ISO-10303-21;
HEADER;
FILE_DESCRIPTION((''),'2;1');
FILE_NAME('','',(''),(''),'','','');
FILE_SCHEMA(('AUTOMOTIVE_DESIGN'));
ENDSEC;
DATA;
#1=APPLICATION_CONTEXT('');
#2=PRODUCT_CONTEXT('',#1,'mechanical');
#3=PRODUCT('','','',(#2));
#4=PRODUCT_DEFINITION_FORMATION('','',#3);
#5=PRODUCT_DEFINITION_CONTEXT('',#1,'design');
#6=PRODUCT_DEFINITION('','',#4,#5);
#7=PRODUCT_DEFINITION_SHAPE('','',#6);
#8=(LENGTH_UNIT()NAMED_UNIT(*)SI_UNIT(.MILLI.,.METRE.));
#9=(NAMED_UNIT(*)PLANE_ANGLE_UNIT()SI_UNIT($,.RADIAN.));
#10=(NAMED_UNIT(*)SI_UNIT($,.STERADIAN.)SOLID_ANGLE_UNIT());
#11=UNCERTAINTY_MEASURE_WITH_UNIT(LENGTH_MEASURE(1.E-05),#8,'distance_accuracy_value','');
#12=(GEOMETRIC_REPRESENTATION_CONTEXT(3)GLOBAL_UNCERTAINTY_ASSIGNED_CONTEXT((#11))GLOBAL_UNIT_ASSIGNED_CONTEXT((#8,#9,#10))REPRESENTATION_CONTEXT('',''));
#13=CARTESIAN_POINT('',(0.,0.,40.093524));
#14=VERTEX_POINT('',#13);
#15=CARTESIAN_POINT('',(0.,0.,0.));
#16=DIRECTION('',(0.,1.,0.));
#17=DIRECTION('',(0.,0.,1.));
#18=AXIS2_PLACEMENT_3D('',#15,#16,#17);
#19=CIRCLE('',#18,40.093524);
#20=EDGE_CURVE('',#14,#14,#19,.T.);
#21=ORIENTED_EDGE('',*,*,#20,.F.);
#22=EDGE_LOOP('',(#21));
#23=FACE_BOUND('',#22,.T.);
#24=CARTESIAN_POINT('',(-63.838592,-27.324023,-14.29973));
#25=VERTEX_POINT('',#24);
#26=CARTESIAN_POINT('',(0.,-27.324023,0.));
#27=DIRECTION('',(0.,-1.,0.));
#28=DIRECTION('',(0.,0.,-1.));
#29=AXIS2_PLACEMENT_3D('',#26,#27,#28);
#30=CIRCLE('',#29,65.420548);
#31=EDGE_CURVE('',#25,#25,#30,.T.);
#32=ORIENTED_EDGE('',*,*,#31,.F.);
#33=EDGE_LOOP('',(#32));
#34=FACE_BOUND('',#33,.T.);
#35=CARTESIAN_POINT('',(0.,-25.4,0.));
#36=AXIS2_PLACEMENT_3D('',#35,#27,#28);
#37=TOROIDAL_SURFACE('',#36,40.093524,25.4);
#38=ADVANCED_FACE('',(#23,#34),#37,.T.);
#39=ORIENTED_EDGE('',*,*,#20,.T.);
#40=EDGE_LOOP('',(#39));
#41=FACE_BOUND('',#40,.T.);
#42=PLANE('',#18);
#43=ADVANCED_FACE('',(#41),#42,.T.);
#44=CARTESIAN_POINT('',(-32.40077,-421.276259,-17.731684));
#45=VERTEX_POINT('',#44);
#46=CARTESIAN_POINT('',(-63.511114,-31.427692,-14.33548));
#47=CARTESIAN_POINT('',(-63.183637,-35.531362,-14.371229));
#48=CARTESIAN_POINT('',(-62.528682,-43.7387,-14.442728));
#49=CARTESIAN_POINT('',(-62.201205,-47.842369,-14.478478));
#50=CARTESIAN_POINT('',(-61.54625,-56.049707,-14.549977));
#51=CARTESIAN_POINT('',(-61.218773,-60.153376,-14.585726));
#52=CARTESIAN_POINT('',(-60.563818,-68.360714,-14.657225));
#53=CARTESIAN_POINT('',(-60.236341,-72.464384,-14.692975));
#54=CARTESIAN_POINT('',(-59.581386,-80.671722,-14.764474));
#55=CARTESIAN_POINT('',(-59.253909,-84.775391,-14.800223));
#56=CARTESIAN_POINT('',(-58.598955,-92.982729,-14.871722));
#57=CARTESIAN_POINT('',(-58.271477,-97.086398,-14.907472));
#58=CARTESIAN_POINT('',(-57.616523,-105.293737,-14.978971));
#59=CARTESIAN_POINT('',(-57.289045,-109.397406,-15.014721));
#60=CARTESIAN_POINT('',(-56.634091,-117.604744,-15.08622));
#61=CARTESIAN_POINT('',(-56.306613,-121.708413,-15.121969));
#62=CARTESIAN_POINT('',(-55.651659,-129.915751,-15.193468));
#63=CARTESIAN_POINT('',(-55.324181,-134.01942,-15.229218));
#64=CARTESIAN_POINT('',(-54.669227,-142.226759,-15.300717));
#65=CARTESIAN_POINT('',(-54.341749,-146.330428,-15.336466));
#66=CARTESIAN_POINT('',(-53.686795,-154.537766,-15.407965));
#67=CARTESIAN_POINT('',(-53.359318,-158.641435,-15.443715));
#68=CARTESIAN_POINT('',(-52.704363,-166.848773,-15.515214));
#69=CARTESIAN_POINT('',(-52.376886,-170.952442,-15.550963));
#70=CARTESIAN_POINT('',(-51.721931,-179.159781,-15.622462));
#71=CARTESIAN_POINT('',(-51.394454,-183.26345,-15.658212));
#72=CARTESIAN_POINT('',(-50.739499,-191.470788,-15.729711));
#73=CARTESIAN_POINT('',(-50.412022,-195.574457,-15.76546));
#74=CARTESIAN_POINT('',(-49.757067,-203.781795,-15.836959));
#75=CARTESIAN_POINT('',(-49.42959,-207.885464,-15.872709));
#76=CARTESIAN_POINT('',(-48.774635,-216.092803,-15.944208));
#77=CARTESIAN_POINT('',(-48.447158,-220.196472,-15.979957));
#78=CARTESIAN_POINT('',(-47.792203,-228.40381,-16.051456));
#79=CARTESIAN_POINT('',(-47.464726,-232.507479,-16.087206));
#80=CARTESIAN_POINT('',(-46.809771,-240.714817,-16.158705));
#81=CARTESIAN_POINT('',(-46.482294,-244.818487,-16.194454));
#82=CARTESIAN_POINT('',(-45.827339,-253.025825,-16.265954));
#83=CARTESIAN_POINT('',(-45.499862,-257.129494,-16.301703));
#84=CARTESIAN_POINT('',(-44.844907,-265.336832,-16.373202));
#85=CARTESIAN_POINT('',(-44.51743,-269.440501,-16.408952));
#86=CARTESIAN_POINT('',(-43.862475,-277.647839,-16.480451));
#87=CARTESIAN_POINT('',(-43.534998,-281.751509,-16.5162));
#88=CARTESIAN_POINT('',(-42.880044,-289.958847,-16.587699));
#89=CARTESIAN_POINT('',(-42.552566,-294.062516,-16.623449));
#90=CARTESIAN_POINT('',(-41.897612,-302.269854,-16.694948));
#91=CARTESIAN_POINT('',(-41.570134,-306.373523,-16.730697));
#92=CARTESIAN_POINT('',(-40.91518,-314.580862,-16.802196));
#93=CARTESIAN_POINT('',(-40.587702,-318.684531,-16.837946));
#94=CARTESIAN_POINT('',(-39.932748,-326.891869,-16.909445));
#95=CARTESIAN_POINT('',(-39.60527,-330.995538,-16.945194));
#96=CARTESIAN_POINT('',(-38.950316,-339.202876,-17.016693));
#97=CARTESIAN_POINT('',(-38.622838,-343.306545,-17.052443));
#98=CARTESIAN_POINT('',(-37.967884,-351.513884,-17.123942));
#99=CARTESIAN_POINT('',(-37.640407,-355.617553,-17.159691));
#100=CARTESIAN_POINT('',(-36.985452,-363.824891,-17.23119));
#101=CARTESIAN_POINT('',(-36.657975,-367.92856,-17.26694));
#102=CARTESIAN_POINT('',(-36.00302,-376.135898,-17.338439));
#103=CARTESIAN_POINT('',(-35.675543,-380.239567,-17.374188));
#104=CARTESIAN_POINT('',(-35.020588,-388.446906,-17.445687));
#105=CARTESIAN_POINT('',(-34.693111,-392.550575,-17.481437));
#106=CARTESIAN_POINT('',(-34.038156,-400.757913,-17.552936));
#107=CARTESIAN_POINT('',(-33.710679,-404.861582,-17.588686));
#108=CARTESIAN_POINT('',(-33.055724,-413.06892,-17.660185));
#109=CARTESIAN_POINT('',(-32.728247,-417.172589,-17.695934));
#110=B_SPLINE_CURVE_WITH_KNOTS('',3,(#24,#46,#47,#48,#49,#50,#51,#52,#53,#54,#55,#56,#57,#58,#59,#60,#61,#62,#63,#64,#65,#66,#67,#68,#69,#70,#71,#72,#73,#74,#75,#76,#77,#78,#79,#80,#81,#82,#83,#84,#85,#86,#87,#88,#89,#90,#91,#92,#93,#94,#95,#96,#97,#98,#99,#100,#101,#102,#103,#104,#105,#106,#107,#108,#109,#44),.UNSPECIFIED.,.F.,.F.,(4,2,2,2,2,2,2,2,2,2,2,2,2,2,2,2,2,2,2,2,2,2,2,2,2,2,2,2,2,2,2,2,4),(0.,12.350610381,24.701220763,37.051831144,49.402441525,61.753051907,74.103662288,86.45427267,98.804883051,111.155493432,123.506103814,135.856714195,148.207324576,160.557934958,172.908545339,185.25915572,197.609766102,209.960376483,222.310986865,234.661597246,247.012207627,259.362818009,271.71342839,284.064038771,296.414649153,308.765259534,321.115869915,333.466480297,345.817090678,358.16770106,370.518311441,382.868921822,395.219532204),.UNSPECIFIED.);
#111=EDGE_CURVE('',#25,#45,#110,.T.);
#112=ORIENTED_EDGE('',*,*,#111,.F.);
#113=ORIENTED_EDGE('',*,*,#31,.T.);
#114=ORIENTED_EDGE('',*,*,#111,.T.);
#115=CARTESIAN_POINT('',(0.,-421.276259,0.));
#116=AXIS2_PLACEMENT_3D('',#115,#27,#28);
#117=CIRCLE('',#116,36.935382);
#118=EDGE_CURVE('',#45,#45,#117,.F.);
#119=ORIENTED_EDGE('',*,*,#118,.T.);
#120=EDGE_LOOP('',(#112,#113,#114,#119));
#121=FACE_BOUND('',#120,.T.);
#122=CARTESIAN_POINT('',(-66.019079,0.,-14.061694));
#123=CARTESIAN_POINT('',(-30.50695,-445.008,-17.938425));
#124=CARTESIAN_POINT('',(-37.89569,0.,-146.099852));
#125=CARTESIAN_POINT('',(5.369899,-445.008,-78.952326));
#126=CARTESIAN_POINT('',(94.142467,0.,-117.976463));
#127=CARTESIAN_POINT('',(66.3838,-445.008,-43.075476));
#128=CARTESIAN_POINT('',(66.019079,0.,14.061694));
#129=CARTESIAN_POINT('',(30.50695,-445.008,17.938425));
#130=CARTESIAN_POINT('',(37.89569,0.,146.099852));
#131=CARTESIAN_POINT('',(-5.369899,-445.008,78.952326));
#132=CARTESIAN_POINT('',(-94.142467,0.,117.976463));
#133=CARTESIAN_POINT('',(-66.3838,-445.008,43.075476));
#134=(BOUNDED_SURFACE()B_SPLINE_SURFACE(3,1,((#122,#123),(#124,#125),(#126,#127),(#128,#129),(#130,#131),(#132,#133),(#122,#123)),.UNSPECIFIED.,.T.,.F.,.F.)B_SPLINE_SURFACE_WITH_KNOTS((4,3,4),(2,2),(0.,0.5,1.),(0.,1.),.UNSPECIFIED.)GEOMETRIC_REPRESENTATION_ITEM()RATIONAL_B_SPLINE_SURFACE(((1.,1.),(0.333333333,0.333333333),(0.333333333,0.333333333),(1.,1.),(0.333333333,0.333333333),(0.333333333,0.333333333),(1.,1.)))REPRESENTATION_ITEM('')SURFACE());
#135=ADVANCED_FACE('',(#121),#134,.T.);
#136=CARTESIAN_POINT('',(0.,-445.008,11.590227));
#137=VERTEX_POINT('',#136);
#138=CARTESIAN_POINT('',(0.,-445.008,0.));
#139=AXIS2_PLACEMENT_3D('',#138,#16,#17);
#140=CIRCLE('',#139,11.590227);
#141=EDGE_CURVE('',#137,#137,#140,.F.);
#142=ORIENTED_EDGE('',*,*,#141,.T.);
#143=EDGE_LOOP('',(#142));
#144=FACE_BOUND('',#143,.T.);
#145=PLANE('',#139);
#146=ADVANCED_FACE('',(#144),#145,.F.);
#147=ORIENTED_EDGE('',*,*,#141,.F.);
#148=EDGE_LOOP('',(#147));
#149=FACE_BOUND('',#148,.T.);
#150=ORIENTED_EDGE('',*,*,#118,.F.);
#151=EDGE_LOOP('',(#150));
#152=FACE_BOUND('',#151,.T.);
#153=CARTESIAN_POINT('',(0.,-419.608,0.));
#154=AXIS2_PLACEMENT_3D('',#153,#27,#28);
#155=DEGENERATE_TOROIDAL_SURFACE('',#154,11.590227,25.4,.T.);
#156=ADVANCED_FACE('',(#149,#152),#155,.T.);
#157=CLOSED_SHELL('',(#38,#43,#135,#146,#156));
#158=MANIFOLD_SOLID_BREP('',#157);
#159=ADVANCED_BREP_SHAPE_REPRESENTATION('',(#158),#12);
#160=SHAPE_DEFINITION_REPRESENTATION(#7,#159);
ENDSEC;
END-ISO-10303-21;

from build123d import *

# Parameters (mm, degrees)
FILLET3_R = 25.4


with BuildPart() as part:
    # Loft1: read off the stored shape, not the designer's step
    # Loft1: loft between two sections, ruled curve by curve
    loft1_from = [
        Edge.make_bspline([(-66.019078693, 0, -14.06169437), (-37.895689953, 0, -146.099851756), (94.142467433, 0, -117.976463016), (66.019078693, 0, 14.06169437), (37.895689953, 0, 146.099851756), (-94.142467433, 0, 117.976463016), (-66.019078693, 0, -14.06169437)], [0, 0, 0, 0, 0.5, 0.5, 0.5, 1, 1, 1, 1], 3, [1, 0.333333333, 0.333333333, 1, 0.333333333, 0.333333333, 1]),
    ]
    loft1_to = [
        Edge.make_bspline([(-30.506950465, -445.008, -17.938424955), (5.369899445, -445.008, -78.952325886), (66.383800376, -445.008, -43.075475975), (30.506950465, -445.008, 17.938424955), (-5.369899445, -445.008, 78.952325886), (-66.383800376, -445.008, 43.075475975), (-30.506950465, -445.008, -17.938424955)], [0, 0, 0, 0, 0.5, 0.5, 0.5, 1, 1, 1, 1], 3, [1, 0.333333333, 0.333333333, 1, 0.333333333, 0.333333333, 1]),
    ]
    loft1 = Solid(Shell([*[Face.make_surface_from_curves(loft1_from[k], loft1_to[k]) for k in range(1)], Face(Wire(loft1_from)), Face(Wire(loft1_to))]))
    add(loft1)

    # Fillet3
    fillet3_edges = [part.edges().sort_by_distance(p)[0] for p in [
        (30.506950465, -445.008, 17.938424955),
        (66.019078693, 0, 14.06169437),
    ]]
    fillet(fillet3_edges, radius=FILLET3_R)


solid = part.part
